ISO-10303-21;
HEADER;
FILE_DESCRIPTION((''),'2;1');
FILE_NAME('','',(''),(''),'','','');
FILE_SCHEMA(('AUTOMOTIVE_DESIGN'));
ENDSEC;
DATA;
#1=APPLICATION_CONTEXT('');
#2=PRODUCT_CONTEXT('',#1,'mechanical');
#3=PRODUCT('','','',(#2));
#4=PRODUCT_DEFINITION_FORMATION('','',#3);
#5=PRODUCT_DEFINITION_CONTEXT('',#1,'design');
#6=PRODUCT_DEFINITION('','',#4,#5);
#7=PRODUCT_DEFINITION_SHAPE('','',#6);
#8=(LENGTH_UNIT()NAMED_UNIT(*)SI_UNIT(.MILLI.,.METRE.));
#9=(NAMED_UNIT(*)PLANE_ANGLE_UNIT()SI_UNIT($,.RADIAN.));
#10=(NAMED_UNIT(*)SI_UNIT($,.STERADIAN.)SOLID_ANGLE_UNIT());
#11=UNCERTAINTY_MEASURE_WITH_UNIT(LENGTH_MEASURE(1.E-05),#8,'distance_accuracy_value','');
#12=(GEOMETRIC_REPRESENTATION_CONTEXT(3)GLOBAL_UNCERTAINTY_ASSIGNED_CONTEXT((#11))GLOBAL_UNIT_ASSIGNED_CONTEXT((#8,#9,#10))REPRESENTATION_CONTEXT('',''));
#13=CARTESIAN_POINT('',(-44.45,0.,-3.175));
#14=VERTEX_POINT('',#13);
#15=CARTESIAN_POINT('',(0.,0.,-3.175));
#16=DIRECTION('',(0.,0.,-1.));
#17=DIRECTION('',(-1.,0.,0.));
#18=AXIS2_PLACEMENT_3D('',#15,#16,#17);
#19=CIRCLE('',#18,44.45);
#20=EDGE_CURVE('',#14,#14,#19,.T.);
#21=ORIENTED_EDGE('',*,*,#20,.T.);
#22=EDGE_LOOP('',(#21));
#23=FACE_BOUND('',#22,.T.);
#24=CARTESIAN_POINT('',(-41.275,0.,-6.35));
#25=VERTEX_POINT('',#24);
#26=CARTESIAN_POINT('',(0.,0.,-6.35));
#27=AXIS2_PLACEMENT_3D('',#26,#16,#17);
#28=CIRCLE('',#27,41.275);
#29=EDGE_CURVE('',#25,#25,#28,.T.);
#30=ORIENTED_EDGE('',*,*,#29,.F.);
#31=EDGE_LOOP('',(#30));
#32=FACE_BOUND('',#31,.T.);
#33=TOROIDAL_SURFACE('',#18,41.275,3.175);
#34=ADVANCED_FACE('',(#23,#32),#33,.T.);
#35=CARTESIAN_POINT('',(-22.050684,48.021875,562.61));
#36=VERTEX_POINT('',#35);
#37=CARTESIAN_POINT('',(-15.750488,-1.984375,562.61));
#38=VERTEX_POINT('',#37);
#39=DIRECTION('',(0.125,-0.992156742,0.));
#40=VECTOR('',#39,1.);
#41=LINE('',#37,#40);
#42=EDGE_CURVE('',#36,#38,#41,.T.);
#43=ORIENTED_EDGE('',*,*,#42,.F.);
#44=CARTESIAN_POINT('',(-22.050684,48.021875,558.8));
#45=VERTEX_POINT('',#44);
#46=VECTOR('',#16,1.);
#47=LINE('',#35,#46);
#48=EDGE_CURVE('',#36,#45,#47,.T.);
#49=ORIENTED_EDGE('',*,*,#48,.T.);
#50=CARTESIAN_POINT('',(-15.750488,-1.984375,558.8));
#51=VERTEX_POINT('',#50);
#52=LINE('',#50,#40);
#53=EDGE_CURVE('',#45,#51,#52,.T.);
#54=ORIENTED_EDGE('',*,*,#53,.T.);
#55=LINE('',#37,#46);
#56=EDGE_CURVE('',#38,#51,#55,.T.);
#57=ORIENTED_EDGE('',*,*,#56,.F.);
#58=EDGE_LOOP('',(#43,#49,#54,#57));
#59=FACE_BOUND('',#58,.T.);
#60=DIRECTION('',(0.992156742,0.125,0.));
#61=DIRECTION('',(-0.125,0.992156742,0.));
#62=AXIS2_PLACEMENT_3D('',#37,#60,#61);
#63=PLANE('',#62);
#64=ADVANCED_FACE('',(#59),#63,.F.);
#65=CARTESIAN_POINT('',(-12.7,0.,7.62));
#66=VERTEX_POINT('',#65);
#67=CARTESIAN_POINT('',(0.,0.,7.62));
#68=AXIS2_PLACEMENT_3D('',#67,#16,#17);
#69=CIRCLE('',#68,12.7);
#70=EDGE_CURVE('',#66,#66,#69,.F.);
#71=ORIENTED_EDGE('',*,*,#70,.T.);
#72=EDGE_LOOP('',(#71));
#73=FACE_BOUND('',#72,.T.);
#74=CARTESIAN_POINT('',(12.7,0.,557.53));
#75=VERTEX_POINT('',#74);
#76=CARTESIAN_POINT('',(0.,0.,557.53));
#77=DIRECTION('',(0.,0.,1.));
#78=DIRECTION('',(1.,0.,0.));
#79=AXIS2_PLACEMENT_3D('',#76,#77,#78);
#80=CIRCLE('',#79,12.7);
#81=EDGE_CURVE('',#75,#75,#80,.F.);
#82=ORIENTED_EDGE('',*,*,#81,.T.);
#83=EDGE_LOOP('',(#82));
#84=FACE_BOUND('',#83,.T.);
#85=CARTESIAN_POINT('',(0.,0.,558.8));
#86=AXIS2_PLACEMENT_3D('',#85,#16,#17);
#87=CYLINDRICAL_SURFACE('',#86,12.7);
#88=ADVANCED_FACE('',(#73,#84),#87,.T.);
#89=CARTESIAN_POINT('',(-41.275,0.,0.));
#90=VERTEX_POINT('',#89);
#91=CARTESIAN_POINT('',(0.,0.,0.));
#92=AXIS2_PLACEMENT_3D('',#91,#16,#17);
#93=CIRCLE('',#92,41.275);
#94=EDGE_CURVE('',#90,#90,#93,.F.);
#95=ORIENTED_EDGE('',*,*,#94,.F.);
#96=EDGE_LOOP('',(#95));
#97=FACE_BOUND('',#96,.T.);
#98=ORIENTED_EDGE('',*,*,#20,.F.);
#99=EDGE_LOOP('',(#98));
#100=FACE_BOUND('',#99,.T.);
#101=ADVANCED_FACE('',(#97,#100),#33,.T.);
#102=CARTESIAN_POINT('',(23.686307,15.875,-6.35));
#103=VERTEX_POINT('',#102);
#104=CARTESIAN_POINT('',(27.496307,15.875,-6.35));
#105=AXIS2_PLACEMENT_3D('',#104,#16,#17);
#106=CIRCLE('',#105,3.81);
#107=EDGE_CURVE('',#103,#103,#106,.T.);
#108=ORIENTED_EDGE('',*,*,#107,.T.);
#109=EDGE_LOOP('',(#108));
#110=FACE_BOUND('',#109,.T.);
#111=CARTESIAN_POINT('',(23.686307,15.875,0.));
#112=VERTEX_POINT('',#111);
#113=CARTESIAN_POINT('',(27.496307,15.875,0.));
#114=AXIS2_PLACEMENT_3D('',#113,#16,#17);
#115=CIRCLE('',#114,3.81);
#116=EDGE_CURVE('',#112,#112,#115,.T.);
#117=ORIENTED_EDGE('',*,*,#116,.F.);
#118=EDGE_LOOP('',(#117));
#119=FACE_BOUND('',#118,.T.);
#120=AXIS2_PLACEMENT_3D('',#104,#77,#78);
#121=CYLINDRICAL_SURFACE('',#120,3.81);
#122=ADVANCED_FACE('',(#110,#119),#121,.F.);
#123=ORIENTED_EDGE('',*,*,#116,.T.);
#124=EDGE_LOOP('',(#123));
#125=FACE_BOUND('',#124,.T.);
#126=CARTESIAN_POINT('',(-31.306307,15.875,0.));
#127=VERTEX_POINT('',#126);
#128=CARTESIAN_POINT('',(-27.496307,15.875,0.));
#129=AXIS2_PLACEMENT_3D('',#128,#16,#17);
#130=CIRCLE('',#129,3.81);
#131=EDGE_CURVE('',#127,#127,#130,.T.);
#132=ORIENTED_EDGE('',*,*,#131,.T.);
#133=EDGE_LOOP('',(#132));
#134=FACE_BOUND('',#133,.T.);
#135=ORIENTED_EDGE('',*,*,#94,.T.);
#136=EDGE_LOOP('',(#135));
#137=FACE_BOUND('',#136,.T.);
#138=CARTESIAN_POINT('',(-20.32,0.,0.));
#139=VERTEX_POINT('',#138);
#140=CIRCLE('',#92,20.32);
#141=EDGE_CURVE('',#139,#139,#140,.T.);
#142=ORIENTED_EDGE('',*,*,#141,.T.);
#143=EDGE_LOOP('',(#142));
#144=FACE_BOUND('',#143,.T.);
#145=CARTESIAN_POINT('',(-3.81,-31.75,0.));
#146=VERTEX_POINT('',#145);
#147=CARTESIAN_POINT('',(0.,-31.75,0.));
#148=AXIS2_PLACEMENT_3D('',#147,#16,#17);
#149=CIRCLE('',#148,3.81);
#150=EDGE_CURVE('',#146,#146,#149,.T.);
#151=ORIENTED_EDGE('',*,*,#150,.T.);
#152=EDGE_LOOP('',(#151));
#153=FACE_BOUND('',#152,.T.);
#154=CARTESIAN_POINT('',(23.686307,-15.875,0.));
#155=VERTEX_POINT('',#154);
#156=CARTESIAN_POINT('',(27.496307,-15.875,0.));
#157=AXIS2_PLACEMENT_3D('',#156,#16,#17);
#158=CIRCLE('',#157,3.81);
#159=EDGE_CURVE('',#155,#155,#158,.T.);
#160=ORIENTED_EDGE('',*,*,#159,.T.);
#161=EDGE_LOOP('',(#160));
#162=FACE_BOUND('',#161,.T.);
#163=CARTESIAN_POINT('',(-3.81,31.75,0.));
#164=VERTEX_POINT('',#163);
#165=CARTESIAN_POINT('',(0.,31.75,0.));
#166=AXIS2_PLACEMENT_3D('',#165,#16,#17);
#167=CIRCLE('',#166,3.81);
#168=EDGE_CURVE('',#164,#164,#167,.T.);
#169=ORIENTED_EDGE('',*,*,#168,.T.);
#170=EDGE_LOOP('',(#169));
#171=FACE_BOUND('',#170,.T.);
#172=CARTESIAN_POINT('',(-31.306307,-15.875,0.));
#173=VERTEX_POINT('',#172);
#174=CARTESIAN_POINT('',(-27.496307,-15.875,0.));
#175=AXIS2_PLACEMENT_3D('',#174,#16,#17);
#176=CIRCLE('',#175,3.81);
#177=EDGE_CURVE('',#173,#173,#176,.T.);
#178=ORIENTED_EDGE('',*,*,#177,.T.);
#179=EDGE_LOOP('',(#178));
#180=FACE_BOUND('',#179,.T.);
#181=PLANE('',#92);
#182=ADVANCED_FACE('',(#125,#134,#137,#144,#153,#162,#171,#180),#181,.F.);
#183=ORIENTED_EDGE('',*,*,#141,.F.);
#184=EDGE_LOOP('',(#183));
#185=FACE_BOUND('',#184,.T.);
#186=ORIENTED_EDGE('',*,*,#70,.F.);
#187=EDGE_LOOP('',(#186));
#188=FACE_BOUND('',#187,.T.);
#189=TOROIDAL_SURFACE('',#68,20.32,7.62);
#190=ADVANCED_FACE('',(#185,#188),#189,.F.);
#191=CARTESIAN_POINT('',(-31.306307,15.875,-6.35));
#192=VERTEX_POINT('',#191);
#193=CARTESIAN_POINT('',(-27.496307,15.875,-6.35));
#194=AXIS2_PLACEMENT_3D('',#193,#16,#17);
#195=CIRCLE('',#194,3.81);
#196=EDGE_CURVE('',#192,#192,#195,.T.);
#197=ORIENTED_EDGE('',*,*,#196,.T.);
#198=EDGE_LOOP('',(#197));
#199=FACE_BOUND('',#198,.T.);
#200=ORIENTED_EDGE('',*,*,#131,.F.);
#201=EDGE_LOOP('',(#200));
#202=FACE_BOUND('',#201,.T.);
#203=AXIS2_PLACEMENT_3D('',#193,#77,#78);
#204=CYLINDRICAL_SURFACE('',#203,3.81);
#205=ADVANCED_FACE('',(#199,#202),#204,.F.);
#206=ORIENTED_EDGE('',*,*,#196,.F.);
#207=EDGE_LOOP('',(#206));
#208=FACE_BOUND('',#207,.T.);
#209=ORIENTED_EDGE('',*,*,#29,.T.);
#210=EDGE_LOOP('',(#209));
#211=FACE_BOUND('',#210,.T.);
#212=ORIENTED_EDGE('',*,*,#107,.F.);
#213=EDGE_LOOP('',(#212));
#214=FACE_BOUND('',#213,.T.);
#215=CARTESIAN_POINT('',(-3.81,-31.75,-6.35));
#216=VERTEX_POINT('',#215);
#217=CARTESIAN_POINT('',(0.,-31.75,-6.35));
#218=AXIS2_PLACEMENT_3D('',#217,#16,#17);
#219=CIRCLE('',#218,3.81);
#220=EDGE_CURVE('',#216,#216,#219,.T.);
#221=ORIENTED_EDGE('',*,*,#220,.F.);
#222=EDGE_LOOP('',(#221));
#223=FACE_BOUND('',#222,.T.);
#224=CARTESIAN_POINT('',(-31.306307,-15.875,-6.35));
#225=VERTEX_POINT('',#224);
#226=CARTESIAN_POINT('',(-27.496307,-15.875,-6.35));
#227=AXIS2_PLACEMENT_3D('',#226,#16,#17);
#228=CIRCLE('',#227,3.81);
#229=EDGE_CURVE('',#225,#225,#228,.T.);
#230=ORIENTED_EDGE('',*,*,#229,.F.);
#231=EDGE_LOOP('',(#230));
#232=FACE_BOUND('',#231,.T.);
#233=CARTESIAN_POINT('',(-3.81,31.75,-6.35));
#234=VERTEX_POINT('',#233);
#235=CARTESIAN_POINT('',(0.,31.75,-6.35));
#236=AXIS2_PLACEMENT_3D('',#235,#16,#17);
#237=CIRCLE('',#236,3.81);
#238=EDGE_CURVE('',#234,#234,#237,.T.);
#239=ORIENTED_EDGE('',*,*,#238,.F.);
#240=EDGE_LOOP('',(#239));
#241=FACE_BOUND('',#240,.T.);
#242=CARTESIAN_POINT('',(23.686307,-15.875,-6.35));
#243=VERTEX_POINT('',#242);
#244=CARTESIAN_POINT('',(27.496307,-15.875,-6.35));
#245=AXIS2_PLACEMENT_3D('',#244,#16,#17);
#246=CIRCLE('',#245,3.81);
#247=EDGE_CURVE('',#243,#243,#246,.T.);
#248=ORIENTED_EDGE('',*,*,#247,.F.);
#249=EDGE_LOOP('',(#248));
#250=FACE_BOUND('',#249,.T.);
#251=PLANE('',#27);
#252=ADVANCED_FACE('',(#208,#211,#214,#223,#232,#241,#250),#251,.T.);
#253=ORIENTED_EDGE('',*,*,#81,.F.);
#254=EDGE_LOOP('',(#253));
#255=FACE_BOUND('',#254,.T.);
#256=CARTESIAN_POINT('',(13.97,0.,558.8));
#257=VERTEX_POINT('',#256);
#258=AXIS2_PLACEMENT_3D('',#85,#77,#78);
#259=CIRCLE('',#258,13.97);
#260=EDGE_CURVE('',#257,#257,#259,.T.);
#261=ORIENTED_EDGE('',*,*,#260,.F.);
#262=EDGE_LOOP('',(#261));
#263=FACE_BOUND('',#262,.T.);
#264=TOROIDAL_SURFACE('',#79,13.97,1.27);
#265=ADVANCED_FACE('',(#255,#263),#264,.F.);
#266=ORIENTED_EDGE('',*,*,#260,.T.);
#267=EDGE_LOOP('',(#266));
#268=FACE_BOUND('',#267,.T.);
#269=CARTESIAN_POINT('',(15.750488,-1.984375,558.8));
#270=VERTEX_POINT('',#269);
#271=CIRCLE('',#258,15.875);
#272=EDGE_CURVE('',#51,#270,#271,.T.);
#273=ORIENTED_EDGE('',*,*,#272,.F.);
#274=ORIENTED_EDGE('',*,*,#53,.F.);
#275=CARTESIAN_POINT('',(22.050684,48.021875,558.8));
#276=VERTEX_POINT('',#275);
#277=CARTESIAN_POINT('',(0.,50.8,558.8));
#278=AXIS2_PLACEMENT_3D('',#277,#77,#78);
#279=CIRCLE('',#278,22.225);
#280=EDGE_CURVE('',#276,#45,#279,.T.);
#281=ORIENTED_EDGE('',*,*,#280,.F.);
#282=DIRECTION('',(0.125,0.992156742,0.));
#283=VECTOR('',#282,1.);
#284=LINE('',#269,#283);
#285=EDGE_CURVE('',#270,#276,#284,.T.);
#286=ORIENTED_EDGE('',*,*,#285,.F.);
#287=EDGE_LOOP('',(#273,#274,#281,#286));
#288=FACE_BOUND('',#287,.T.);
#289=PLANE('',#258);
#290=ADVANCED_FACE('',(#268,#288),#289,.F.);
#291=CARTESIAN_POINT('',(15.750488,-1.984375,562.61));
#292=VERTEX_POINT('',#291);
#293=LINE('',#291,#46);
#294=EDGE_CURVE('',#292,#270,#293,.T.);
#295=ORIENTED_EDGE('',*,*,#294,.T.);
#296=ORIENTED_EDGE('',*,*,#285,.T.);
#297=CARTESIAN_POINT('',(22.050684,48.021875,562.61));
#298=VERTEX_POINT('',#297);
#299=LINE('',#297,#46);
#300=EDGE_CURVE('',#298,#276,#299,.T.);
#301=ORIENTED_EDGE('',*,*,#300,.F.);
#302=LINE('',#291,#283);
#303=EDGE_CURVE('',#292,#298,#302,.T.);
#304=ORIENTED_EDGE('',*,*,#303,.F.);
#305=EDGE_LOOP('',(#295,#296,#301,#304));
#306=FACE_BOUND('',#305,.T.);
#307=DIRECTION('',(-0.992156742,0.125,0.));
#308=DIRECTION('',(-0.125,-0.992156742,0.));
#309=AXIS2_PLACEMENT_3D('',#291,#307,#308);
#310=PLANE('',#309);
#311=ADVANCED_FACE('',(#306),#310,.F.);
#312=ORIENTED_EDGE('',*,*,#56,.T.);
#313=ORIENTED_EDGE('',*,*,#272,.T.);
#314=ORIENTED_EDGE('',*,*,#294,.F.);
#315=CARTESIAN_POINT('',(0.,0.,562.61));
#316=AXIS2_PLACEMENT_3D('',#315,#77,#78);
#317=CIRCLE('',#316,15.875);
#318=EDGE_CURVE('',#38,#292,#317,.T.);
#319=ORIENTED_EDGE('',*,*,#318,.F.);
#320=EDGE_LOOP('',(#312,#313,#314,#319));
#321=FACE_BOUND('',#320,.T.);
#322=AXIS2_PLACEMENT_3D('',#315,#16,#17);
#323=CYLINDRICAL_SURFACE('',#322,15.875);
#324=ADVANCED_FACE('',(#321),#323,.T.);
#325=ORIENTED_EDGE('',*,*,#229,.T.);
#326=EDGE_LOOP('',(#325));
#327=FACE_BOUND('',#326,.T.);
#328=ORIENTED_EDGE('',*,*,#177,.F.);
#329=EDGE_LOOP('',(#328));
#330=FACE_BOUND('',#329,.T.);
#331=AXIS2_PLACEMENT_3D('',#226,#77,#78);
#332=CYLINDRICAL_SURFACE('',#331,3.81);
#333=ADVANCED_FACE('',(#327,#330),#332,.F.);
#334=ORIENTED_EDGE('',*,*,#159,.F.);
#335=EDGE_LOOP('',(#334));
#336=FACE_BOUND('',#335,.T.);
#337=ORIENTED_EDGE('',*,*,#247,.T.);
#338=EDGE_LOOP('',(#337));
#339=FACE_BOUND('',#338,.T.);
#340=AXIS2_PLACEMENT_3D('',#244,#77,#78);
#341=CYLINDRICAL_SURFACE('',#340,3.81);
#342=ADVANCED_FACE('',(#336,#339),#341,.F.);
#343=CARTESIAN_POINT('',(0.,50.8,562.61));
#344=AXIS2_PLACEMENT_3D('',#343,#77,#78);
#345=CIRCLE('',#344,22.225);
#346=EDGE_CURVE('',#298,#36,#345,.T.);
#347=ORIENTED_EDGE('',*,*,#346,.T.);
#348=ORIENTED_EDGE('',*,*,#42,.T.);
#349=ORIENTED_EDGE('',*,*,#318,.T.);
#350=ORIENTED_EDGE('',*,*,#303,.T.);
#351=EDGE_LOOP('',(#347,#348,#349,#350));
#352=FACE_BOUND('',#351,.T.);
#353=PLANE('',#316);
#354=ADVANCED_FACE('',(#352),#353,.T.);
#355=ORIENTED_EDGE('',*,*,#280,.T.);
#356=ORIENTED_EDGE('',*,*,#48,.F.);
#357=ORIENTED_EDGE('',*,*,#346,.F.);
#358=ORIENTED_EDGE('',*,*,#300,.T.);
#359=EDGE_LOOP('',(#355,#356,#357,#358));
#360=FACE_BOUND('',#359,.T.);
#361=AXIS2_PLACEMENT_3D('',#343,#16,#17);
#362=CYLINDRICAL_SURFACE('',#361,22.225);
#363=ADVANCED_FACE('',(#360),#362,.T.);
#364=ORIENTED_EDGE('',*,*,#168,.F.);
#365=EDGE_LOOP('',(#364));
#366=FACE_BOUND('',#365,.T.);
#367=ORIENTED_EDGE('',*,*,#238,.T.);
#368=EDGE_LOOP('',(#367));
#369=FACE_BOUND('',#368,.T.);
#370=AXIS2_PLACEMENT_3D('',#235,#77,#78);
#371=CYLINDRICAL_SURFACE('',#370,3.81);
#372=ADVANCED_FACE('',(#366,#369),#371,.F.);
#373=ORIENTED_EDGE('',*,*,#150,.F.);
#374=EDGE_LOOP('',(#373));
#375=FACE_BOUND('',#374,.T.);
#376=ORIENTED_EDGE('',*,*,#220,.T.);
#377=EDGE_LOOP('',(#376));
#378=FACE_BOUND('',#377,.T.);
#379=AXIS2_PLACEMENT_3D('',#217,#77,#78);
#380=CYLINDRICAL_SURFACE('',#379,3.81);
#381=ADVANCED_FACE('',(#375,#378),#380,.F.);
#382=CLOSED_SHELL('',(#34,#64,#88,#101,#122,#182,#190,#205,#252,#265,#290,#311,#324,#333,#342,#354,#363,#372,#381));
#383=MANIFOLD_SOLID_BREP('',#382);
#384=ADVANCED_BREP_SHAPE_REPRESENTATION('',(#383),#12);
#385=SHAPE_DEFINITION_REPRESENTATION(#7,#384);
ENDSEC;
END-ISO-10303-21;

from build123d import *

# Parameters (mm, degrees)
SKETCH2_R           = 12.7
BOSS_EXTRUDE1_DEPTH = 558.8
SKETCH3_R           = 44.45
SKETCH3_R_2         = 3.81
BOSS_EXTRUDE2_DEPTH = 6.35
FILLET1_R           = 7.62
FILLET2_R           = 3.175
BOSS_EXTRUDE3_DEPTH = 3.81
FILLET3_R           = 1.27


with BuildPart() as part:
    # Sketch2 → Boss-Extrude1 (new body)
    with BuildSketch(Plane.XY):
        Circle(SKETCH2_R)
    extrude(amount=BOSS_EXTRUDE1_DEPTH)

    # Sketch3 → Boss-Extrude2 (add)
    with BuildSketch(Plane(origin=(0, 0, 0), x_dir=(-1, 0, 0), z_dir=(0, 0, -1))):
        Circle(SKETCH3_R)
        with Locations((0, 31.75)):
            Circle(SKETCH3_R_2, mode=Mode.SUBTRACT)
        with Locations((27.49630657, 15.875)):
            Circle(SKETCH3_R_2, mode=Mode.SUBTRACT)
        with Locations((27.49630657, -15.875)):
            Circle(SKETCH3_R_2, mode=Mode.SUBTRACT)
        with Locations((0, -31.75)):
            Circle(SKETCH3_R_2, mode=Mode.SUBTRACT)
        with Locations((-27.49630657, -15.875)):
            Circle(SKETCH3_R_2, mode=Mode.SUBTRACT)
        with Locations((-27.49630657, 15.875)):
            Circle(SKETCH3_R_2, mode=Mode.SUBTRACT)
    extrude(amount=BOSS_EXTRUDE2_DEPTH)

    # Fillet1
    fillet1_edges = [part.edges().sort_by_distance(p)[0] for p in [
        (-12.7, 0, 0),
    ]]
    fillet(fillet1_edges, radius=FILLET1_R)

    # Fillet2
    fillet2_edges = [part.edges().sort_by_distance(p)[0] for p in [
        (44.45, 0, -6.35),
        (44.45, 0, 0),
    ]]
    fillet(fillet2_edges, radius=FILLET2_R - 0.0001)  # a hair under: the kernel refuses the full size

    # Sketch4 → Boss-Extrude3 (add)
    with BuildSketch(Plane.XY.offset(558.8)):
        with BuildLine():
            Line((-15.750488274, -1.984375), (-22.050683583, 48.021875))
            ThreePointArc((-22.050683583, 48.021875), (0, 73.025), (22.050683583, 48.021875))
            Line((22.050683583, 48.021875), (15.750488274, -1.984375))
            ThreePointArc((15.750488274, -1.984375), (0, -15.875), (-15.750488274, -1.984375))
        make_face()
    extrude(amount=BOSS_EXTRUDE3_DEPTH)

    # Fillet3
    fillet3_edges = [part.edges().sort_by_distance(p)[0] for p in [
        (-12.7, 0, 558.8),
    ]]
    fillet(fillet3_edges, radius=FILLET3_R)


solid = part.part
